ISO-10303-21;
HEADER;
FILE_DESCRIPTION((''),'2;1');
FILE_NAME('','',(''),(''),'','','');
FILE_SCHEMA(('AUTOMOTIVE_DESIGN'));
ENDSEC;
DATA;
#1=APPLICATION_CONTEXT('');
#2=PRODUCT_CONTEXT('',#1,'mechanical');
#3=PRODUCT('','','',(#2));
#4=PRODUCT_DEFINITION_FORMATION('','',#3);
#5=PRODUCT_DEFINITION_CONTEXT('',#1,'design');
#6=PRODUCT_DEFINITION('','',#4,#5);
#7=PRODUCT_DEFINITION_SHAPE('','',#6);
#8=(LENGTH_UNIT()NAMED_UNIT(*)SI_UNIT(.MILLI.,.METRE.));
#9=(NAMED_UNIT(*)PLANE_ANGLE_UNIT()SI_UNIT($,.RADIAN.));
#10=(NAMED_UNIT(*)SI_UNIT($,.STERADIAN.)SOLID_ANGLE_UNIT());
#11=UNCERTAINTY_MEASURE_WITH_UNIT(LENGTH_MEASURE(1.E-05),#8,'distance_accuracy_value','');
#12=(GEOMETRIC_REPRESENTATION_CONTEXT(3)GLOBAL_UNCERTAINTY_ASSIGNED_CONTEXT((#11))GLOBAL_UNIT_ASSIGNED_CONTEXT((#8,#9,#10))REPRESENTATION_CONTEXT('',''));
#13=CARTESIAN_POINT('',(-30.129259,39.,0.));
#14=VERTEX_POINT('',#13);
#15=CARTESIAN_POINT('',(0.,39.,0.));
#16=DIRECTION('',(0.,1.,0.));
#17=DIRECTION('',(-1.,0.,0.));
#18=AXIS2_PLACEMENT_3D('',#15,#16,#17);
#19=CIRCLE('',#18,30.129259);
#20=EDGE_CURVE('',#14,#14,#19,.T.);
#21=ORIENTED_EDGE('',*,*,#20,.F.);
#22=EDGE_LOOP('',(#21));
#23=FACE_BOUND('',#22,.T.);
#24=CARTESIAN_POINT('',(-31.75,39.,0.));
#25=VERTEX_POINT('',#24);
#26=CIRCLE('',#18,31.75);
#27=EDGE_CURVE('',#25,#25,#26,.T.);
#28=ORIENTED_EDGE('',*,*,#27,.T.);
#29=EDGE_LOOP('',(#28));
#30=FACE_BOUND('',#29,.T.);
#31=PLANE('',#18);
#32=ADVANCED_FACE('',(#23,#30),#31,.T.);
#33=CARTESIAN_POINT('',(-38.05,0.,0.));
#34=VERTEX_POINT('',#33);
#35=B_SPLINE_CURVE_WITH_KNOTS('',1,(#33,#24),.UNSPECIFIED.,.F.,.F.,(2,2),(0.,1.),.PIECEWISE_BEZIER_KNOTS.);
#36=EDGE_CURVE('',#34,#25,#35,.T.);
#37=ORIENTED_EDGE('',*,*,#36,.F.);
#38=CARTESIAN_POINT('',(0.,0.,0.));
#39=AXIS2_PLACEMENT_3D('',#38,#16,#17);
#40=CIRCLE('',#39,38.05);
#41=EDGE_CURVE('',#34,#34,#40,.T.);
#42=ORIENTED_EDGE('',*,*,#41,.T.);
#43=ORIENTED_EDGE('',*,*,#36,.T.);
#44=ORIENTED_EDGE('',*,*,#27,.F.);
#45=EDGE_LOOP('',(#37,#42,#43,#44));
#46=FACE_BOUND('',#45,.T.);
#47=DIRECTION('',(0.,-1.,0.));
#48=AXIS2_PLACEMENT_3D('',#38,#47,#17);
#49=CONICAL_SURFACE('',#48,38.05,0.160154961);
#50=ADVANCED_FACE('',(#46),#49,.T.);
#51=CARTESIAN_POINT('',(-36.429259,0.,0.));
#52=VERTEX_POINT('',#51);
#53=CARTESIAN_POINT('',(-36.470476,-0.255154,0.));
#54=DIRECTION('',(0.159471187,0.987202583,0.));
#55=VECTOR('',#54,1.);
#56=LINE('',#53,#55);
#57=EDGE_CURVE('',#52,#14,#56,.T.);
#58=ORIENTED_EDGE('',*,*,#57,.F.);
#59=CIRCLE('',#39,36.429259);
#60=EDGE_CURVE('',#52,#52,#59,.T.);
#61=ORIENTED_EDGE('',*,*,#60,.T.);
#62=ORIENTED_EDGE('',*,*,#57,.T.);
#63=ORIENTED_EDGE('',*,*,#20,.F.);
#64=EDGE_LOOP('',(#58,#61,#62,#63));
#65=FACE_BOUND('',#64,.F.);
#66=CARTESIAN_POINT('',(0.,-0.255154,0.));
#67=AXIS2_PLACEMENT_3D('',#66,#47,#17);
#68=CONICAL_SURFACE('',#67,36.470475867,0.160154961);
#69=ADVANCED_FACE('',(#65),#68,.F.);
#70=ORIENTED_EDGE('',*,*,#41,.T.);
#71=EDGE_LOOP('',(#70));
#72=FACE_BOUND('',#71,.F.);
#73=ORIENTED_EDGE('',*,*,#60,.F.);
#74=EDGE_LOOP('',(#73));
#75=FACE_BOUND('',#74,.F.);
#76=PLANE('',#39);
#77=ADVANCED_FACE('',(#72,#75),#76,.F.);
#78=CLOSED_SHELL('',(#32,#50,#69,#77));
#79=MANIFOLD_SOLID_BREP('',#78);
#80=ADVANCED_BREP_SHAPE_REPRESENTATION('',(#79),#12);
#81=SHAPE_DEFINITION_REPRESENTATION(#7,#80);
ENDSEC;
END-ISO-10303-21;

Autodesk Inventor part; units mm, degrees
ref_plane "YZ Plane" through (0, 0, 0) normal (1, 0, 0) x (0, 1, 0)
ref_plane "XY Plane" through (0, 0, 0) normal (0, 0, 1) x (1, 0, 0)
sketch "Szkic6" plane through (0, 0, 0) normal (0, 1, 0) x (-1, 0, 0)
  circle A0 centre (0, 0) radius 38.05
  dimension "d33" = 76.1
ref_plane "Płaszczyzna konstrukcyjna1" through (0, 39, 0) normal (0, 1, 0) x (-1, 0, 0)
sketch "Szkic7" plane through (0, 39, 0) normal (0, 1, 0) x (-1, 0, 0)
  circle A0 centre (0, 0) radius 31.75
  dimension "d35" = 63.5
loft "Wyciągnięcie złożone1" add profiles "Szkic6", "Szkic7"
shell "Skorupa1" thickness 1.6 removed faces 2 at (14.3997, 39, 5.5289) at (-5.8996, 0, 7.9079)
equation "\"d33\" = OD1"
equation "\"d35\" = OD2"
equation "\"d52\" = THK"
equation "\"SzerokośćGięciaPodcięcia\" = Grubość"
equation "\"RozmiarPodcięciaNarożnika\" = 4 * Grubość"
equation "\"PromieńPrzejścia\" = PromieńGięcia"
equation "\"Rozmiar_promienia_Jacobiego\" = PromieńGięcia"
equation "\"Wielk_odstępu\" = Grubość"
equation "\"d2\" = PromieńGięcia"
equation "\"d23\" = PromieńGięcia"
equation "\"OD1\" = 76.1"
equation "\"OD2\" = 63.5"
equation "\"L\" = 39"
equation "\"THK\" = 1.6"
equation "\"d34\" = L"
equation "\"Grubość\" = 1.5"
equation "\"PromieńGięcia\" = 3"
properties part number "Redukcja symetryczna Ø76,1x63,5x1,6 L=39" material "304"
